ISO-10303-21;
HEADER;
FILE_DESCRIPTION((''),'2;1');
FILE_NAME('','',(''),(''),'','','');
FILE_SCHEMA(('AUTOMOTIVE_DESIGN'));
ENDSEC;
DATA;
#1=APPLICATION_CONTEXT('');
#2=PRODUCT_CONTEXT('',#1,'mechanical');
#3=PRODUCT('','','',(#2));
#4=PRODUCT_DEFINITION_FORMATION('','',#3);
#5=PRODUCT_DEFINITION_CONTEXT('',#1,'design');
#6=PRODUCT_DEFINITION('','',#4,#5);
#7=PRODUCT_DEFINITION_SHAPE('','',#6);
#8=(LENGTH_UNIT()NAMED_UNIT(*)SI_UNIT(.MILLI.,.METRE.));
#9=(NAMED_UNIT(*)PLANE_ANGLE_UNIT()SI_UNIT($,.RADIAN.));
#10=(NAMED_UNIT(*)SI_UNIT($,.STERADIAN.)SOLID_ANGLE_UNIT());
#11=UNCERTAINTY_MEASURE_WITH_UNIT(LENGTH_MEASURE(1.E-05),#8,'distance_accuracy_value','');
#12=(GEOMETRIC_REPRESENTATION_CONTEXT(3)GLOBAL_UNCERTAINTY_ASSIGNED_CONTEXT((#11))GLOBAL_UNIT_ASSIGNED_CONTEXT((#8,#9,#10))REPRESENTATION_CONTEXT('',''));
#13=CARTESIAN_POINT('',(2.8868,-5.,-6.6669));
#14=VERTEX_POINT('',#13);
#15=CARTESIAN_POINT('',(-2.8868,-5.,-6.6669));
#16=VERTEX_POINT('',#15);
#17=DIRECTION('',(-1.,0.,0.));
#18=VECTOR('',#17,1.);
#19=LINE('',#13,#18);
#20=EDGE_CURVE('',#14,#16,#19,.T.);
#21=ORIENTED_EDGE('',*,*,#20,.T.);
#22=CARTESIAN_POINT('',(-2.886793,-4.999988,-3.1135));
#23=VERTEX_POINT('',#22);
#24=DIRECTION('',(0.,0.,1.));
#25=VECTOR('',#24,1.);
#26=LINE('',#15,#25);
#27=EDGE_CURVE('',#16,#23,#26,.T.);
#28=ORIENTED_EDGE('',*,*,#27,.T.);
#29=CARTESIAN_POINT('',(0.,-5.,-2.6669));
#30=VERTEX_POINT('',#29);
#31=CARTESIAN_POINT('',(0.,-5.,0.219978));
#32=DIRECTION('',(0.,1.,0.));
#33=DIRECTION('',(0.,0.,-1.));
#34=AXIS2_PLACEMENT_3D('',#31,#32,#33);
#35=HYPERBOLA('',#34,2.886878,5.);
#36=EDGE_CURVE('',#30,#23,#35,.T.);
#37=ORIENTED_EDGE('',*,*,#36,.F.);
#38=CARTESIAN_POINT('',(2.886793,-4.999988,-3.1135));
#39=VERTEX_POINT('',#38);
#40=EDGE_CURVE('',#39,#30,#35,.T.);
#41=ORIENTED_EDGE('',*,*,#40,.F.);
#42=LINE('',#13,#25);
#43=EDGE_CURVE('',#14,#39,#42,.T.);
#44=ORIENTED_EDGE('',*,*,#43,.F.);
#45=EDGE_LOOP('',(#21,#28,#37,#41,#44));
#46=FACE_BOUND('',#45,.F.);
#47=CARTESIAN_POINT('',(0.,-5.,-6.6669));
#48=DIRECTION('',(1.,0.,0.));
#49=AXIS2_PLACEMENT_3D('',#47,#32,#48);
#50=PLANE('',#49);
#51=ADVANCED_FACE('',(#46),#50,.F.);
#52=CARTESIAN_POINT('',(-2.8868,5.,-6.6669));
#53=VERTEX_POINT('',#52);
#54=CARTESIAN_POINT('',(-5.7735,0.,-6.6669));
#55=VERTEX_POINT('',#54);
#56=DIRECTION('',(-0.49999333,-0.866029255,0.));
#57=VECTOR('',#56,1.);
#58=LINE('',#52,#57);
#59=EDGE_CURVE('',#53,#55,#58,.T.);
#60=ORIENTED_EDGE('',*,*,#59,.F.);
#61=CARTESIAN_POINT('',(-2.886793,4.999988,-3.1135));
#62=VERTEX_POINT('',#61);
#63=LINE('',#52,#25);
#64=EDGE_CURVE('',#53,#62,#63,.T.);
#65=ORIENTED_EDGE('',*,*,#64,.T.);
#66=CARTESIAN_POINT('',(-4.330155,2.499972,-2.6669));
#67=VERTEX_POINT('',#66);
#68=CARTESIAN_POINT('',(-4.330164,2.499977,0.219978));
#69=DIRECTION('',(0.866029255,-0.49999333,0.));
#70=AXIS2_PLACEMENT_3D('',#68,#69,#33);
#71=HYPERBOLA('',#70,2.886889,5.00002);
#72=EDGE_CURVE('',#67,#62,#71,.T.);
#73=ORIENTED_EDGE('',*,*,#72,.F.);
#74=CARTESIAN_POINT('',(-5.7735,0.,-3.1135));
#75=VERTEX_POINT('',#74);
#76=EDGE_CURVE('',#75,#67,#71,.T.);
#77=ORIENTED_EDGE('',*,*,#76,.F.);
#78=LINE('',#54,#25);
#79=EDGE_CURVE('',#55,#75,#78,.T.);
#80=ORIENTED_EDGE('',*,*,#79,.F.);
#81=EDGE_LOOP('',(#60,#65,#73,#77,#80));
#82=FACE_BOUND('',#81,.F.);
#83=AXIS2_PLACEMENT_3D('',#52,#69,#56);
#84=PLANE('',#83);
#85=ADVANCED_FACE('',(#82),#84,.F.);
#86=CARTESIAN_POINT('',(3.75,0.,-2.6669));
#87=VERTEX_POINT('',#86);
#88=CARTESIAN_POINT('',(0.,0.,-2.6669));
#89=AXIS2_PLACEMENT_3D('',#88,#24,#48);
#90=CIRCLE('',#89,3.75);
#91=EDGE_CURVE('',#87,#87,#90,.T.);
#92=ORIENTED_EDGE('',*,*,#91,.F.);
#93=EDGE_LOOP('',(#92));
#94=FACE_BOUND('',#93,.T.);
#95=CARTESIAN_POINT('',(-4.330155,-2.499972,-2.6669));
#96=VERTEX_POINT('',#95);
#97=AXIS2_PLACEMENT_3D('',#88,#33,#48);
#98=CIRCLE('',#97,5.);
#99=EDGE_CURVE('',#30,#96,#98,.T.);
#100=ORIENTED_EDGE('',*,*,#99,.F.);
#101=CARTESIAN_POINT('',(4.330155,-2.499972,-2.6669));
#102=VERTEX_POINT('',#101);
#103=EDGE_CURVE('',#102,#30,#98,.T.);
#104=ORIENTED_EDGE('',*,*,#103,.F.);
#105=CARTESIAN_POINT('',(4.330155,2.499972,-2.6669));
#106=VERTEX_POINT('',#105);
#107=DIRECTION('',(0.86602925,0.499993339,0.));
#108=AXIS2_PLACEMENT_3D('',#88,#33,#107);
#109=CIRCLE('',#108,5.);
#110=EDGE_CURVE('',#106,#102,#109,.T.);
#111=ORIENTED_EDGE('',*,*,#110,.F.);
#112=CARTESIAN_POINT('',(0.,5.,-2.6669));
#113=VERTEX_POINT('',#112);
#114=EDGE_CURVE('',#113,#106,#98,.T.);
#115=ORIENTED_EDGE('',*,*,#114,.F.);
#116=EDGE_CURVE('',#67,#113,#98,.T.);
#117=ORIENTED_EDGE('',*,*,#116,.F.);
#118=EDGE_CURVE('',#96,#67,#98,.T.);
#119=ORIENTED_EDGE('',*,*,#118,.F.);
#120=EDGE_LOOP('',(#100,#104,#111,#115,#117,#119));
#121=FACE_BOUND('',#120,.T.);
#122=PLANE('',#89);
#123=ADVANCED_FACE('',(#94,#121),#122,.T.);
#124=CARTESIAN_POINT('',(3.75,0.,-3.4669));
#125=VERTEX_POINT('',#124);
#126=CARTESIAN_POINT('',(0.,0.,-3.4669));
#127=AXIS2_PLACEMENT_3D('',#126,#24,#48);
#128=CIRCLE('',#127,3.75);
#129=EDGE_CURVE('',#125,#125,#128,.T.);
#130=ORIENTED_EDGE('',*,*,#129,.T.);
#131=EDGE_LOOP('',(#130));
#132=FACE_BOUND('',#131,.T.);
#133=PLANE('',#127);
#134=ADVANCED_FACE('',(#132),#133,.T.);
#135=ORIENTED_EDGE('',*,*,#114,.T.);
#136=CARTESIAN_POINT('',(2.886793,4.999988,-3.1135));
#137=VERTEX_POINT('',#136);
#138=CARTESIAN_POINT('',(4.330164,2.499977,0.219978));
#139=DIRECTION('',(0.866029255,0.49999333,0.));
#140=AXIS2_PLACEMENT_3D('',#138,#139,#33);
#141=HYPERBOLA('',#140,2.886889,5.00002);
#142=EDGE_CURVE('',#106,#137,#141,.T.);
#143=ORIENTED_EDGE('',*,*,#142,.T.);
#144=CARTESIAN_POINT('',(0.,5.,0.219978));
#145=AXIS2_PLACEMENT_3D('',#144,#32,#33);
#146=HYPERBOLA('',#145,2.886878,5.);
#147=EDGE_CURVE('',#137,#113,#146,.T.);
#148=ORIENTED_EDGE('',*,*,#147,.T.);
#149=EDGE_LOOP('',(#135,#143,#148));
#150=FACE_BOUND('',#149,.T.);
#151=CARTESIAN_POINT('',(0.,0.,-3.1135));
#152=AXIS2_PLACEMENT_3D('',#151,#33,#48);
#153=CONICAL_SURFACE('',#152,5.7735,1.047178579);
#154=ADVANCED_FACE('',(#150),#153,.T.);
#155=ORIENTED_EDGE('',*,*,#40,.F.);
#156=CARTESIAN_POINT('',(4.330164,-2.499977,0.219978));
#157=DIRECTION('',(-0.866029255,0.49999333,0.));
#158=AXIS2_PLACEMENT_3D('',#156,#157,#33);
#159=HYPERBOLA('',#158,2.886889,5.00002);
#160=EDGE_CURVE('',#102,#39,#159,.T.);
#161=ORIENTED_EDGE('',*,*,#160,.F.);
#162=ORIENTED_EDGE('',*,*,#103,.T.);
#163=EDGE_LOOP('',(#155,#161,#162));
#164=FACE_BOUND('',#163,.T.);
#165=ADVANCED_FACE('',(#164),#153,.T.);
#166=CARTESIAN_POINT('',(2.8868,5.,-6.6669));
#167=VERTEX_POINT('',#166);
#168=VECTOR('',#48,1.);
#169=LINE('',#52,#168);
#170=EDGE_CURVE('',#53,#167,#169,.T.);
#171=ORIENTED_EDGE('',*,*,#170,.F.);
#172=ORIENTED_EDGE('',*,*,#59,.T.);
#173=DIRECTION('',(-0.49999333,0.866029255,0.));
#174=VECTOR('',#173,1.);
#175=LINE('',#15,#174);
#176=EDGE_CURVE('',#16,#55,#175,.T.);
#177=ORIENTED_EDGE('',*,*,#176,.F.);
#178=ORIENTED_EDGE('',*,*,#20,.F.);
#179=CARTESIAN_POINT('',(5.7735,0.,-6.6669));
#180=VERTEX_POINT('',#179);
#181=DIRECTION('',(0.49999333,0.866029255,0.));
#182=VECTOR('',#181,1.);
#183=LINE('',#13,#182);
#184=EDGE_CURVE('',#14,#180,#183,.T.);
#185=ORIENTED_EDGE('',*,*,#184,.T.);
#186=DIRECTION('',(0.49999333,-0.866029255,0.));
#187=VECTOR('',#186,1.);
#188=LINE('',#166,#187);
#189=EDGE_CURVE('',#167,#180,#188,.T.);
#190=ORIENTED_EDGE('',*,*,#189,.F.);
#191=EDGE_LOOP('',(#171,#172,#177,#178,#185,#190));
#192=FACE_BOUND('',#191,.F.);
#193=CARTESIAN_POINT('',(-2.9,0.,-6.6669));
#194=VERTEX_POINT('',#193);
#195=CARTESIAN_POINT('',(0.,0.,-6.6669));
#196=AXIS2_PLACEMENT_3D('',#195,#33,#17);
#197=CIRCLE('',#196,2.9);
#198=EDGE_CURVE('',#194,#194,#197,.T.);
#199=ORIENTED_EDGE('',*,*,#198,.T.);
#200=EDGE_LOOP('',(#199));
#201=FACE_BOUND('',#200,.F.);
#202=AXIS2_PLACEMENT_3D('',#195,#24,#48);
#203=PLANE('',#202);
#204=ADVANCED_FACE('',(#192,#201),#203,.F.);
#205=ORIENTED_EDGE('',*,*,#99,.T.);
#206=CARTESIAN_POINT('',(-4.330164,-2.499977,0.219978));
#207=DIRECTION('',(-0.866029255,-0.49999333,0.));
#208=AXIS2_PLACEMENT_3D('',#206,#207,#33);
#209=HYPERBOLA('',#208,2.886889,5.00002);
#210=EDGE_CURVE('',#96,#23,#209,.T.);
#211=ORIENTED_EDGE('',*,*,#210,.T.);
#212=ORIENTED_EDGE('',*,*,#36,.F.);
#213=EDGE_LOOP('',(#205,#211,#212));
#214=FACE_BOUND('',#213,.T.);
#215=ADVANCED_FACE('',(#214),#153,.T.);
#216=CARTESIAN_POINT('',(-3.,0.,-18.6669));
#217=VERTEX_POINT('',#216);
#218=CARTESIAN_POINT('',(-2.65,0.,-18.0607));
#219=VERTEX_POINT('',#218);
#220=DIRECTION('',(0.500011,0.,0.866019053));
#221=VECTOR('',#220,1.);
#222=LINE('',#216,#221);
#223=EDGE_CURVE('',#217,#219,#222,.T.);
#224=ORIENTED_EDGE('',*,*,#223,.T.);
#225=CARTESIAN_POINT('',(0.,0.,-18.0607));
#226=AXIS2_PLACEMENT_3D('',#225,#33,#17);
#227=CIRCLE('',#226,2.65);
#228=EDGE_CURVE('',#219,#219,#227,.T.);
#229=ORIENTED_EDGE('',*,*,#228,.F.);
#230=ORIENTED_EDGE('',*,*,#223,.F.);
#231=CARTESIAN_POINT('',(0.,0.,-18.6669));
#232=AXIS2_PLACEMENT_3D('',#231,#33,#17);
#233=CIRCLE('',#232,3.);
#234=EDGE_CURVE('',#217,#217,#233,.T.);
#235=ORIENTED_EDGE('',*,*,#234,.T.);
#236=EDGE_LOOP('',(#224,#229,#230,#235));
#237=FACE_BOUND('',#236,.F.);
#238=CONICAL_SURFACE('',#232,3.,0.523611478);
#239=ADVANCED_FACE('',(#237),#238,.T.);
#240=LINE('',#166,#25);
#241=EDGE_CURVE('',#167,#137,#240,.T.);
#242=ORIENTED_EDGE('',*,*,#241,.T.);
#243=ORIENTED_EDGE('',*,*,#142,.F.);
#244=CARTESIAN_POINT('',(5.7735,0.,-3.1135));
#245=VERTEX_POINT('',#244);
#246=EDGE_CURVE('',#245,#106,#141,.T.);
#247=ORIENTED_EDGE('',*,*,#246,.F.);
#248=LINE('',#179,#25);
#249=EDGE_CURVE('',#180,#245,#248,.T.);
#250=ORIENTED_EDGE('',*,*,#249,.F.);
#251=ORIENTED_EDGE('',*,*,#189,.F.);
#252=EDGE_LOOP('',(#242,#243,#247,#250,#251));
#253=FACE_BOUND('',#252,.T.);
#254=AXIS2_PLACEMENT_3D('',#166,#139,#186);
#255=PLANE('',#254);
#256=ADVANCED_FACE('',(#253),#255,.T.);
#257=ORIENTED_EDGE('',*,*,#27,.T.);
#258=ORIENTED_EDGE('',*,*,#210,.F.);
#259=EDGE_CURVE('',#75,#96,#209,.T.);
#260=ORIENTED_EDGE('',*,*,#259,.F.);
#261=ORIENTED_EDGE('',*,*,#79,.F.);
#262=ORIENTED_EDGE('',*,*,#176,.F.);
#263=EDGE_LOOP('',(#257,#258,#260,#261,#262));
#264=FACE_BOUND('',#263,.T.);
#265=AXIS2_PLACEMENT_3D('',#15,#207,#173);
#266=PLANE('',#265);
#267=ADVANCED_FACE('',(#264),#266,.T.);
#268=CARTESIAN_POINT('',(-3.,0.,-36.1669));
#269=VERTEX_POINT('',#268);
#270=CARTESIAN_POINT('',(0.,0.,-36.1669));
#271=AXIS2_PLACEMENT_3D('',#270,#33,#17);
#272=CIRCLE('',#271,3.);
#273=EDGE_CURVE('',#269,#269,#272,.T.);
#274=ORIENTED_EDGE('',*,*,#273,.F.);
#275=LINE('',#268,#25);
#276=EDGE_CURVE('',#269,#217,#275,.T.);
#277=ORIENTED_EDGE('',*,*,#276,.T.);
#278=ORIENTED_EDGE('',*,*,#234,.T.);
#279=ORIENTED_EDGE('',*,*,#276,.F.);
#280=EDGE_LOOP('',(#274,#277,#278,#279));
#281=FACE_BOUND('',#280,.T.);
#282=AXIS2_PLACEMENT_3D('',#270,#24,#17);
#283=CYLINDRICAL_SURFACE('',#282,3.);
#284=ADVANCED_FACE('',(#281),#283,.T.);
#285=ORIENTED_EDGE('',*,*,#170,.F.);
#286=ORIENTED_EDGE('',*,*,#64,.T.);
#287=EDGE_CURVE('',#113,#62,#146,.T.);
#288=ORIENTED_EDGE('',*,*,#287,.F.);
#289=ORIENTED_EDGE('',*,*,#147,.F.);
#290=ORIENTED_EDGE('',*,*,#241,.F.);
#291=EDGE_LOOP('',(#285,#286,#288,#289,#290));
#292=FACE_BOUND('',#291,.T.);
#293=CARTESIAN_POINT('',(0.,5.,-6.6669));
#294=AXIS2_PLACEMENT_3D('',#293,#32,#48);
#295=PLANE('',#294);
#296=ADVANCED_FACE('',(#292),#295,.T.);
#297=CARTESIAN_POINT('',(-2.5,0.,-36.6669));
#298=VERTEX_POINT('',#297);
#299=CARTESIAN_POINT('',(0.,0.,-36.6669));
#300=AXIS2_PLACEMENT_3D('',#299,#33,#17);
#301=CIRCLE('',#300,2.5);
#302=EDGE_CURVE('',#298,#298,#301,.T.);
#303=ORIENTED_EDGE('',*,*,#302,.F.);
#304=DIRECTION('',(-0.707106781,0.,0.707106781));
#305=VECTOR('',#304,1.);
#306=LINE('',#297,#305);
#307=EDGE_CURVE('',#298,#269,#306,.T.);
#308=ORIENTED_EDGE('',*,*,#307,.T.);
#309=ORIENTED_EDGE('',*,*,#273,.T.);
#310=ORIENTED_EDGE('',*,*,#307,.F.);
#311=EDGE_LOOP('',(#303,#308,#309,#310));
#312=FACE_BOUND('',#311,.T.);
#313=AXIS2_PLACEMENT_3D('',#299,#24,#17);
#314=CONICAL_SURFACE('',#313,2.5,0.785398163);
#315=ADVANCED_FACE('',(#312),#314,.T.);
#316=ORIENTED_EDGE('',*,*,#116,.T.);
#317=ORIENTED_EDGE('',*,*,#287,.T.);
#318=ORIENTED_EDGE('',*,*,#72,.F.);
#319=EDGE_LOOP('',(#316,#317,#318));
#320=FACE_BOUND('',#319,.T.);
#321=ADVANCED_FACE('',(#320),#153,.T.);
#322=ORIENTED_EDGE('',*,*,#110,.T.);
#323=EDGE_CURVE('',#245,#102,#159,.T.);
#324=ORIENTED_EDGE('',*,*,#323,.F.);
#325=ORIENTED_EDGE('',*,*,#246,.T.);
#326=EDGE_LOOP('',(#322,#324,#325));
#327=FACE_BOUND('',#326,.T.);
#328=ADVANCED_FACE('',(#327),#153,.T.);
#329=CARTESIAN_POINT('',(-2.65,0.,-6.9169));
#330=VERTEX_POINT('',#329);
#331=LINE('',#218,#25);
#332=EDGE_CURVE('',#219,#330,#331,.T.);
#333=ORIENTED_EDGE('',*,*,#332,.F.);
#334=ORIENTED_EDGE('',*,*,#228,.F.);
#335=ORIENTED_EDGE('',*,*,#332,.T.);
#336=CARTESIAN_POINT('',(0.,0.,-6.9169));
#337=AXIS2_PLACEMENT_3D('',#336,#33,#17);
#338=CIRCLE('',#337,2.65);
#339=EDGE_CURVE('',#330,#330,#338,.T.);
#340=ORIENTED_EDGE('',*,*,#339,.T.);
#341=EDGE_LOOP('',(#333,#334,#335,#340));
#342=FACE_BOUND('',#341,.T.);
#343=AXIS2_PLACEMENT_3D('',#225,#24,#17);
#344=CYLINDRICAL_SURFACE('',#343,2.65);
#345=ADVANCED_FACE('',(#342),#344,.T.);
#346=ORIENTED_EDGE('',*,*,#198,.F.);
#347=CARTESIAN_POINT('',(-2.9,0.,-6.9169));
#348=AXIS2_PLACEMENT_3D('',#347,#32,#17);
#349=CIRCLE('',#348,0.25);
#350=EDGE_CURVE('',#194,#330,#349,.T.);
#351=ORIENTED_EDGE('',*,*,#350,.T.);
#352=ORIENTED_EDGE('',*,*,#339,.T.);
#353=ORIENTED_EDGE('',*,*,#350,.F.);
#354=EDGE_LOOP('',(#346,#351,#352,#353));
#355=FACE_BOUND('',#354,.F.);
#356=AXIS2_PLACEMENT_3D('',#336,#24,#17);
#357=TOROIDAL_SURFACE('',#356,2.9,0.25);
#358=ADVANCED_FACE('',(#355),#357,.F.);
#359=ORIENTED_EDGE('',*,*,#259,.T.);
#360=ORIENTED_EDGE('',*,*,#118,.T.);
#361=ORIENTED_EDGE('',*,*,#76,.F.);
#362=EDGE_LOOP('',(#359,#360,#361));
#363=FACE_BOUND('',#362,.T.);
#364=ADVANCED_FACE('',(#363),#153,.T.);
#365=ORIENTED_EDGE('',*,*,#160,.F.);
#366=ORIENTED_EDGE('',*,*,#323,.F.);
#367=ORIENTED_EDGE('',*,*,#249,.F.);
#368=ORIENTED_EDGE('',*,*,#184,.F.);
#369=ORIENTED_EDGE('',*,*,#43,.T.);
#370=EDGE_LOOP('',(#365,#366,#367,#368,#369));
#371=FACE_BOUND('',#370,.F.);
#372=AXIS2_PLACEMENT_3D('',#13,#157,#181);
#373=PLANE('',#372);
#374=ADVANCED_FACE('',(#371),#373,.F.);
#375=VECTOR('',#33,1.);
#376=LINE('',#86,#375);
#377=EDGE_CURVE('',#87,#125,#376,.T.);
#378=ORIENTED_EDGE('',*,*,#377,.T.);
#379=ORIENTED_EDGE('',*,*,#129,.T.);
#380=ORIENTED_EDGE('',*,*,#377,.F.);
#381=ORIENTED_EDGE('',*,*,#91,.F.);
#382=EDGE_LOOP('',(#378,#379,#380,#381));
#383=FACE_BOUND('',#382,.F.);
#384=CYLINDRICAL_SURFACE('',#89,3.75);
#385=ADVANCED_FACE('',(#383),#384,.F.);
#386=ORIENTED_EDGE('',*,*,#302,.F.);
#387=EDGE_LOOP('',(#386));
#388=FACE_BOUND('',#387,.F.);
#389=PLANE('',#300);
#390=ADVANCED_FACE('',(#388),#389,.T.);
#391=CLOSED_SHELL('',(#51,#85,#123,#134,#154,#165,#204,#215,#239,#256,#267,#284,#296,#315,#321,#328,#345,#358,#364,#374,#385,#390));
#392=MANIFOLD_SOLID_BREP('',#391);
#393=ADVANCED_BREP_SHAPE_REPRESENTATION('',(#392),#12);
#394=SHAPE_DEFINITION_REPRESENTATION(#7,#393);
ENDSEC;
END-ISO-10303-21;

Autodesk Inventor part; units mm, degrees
ref_plane "YZ Plane" through (0, 0, 0) normal (1, 0, 0) x (0, 1, 0)
sketch "Sketch2" plane through (0, 0, 0) normal (0, 1, 0) x (-1, 0, 0)
  line L0 (0, -6.6669) -> (0, -36.6669)
  line L1 (0, -36.6669) -> (2.5, -36.6669)
  line L2 (3, -36.1669) -> (3, -18.6669)
  line L3 (3, -18.6669) -> (2.65, -18.0607)
  line L4 (2.65, -18.0607) -> (2.65, -6.6669)
  line L5 (2.65, -6.6669) -> (0, -6.6669)
  line L6 (2.5, -36.6669) -> (3, -36.1669)
  line L7 (3, -36.6669) -> (3, -37.374)
  line L8 (0, -43.5155) -> (0, -0.5255) projected
  dimension "Ds" = 5.3
  dimension "NND" = 6
  dimension "b" = 18
  dimension "d3" = 30
  dimension "d5" = 45
  dimension "PTC" = 1
  dimension "NLG" = 30
revolve "Revolution1" add sketch "Sketch2" angle 360 about axis through (0, 0, -6.6669) along (0, 0, -1)
sketch "Sketch3" plane through (0, 0, -6.6669) normal (0, 0, 1) x (1, 0, 0)
  circle A0 centre (0, 0) radius 2.65 projected
  line L0 (0, 5) -> (2.8868, 5)
  line L1 (2.8868, 5) -> (5.7735, 0)
  line L2 (5.7735, 0) -> (0, 0)
  line L3 (0, 0) -> (0, 5)
  line L4 (0, 5) -> (-2.8868, 5)
  line L5 (-2.8868, 5) -> (-5.7735, 0)
  line L6 (0, -5) -> (2.8868, -5)
  line L7 (2.8868, -5) -> (5.7735, 0)
  line L8 (-2.8868, -5) -> (-5.7735, 0)
  line L9 (0, -5) -> (-2.8868, -5)
  dimension "d9" = 60
  dimension "ParS" = 10
  dimension "msp_d11" = 10
extrude "Extrusion1" add sketch "Sketch3" along normal blind 4
sketch "Sketch4" plane through (0, 0, 0) normal (0, 1, 0) x (-1, 0, 0)
  line L0 (-5, -2.6669) -> (-5.7735, -2.6669)
  line L1 (-5.7735, -2.6669) -> (-5.7735, -3.1135)
  line L2 (-5.7735, -3.1135) -> (-5, -2.6669)
  line L3 (0, -13.5254) -> (0, 34.4838) projected
  line L4 (0, 27.6253) -> (0, 27.1787)
  line L5 (-5.7735, -6.6669) -> (-5.7735, -2.6669) projected
  line L6 (-2.8868, -2.6669) -> (-5.7735, -2.6669) projected
  dimension "d14" = 30
  dimension "msp_d15" = 10
revolve "Revolution2" cut sketch "Sketch4" angle 360 about axis through (0, 0, 27.6253) along (0, 0, -1)
sketch "Sketch5" plane through (0, 0, -2.6669) normal (0, 0, 1) x (1, 0, 0)
  arc A0 (4.3301, 2.5) -> (0, 5) centre (0, 0) ccw projected
  circle A1 centre (0, 0) radius 3.75
  dimension "d27" = 7.5
extrude "Extrusion2" cut sketch "Sketch5" against normal blind 0.8
thread "Thread1" size "M6x1" class "6g" standard "ISO Metric profile" full length
ref_plane "MSC_PF1" through (0, 0, 0) normal (0, 1, 0) x (-1, 0, 0)
ref_plane "MSC_PT1" through (0, 0, -6.6669) normal (0, 0, -1) x (-1, 0, 0)
fillet "Fillet1" radius 0.25 1 edges at (2.65, 0, -6.6669)
equation "\"msp_d11\" = ParS"
equation "\"msp_d15\" = ParS"
equation "\"d27\" = 0.75 * ParS"
equation "\"d28\" = 0.2 * ParK"
equation "\"d30\" = r"
equation "\"msp_d17\" = b"
equation "\"r\" = 0.25"
equation "\"THREADDIA\" = NND"
equation "\"ParK\" = 4"
properties part number "ISO 4015 - M6 x 30" material "Stainless Steel, 440C"
